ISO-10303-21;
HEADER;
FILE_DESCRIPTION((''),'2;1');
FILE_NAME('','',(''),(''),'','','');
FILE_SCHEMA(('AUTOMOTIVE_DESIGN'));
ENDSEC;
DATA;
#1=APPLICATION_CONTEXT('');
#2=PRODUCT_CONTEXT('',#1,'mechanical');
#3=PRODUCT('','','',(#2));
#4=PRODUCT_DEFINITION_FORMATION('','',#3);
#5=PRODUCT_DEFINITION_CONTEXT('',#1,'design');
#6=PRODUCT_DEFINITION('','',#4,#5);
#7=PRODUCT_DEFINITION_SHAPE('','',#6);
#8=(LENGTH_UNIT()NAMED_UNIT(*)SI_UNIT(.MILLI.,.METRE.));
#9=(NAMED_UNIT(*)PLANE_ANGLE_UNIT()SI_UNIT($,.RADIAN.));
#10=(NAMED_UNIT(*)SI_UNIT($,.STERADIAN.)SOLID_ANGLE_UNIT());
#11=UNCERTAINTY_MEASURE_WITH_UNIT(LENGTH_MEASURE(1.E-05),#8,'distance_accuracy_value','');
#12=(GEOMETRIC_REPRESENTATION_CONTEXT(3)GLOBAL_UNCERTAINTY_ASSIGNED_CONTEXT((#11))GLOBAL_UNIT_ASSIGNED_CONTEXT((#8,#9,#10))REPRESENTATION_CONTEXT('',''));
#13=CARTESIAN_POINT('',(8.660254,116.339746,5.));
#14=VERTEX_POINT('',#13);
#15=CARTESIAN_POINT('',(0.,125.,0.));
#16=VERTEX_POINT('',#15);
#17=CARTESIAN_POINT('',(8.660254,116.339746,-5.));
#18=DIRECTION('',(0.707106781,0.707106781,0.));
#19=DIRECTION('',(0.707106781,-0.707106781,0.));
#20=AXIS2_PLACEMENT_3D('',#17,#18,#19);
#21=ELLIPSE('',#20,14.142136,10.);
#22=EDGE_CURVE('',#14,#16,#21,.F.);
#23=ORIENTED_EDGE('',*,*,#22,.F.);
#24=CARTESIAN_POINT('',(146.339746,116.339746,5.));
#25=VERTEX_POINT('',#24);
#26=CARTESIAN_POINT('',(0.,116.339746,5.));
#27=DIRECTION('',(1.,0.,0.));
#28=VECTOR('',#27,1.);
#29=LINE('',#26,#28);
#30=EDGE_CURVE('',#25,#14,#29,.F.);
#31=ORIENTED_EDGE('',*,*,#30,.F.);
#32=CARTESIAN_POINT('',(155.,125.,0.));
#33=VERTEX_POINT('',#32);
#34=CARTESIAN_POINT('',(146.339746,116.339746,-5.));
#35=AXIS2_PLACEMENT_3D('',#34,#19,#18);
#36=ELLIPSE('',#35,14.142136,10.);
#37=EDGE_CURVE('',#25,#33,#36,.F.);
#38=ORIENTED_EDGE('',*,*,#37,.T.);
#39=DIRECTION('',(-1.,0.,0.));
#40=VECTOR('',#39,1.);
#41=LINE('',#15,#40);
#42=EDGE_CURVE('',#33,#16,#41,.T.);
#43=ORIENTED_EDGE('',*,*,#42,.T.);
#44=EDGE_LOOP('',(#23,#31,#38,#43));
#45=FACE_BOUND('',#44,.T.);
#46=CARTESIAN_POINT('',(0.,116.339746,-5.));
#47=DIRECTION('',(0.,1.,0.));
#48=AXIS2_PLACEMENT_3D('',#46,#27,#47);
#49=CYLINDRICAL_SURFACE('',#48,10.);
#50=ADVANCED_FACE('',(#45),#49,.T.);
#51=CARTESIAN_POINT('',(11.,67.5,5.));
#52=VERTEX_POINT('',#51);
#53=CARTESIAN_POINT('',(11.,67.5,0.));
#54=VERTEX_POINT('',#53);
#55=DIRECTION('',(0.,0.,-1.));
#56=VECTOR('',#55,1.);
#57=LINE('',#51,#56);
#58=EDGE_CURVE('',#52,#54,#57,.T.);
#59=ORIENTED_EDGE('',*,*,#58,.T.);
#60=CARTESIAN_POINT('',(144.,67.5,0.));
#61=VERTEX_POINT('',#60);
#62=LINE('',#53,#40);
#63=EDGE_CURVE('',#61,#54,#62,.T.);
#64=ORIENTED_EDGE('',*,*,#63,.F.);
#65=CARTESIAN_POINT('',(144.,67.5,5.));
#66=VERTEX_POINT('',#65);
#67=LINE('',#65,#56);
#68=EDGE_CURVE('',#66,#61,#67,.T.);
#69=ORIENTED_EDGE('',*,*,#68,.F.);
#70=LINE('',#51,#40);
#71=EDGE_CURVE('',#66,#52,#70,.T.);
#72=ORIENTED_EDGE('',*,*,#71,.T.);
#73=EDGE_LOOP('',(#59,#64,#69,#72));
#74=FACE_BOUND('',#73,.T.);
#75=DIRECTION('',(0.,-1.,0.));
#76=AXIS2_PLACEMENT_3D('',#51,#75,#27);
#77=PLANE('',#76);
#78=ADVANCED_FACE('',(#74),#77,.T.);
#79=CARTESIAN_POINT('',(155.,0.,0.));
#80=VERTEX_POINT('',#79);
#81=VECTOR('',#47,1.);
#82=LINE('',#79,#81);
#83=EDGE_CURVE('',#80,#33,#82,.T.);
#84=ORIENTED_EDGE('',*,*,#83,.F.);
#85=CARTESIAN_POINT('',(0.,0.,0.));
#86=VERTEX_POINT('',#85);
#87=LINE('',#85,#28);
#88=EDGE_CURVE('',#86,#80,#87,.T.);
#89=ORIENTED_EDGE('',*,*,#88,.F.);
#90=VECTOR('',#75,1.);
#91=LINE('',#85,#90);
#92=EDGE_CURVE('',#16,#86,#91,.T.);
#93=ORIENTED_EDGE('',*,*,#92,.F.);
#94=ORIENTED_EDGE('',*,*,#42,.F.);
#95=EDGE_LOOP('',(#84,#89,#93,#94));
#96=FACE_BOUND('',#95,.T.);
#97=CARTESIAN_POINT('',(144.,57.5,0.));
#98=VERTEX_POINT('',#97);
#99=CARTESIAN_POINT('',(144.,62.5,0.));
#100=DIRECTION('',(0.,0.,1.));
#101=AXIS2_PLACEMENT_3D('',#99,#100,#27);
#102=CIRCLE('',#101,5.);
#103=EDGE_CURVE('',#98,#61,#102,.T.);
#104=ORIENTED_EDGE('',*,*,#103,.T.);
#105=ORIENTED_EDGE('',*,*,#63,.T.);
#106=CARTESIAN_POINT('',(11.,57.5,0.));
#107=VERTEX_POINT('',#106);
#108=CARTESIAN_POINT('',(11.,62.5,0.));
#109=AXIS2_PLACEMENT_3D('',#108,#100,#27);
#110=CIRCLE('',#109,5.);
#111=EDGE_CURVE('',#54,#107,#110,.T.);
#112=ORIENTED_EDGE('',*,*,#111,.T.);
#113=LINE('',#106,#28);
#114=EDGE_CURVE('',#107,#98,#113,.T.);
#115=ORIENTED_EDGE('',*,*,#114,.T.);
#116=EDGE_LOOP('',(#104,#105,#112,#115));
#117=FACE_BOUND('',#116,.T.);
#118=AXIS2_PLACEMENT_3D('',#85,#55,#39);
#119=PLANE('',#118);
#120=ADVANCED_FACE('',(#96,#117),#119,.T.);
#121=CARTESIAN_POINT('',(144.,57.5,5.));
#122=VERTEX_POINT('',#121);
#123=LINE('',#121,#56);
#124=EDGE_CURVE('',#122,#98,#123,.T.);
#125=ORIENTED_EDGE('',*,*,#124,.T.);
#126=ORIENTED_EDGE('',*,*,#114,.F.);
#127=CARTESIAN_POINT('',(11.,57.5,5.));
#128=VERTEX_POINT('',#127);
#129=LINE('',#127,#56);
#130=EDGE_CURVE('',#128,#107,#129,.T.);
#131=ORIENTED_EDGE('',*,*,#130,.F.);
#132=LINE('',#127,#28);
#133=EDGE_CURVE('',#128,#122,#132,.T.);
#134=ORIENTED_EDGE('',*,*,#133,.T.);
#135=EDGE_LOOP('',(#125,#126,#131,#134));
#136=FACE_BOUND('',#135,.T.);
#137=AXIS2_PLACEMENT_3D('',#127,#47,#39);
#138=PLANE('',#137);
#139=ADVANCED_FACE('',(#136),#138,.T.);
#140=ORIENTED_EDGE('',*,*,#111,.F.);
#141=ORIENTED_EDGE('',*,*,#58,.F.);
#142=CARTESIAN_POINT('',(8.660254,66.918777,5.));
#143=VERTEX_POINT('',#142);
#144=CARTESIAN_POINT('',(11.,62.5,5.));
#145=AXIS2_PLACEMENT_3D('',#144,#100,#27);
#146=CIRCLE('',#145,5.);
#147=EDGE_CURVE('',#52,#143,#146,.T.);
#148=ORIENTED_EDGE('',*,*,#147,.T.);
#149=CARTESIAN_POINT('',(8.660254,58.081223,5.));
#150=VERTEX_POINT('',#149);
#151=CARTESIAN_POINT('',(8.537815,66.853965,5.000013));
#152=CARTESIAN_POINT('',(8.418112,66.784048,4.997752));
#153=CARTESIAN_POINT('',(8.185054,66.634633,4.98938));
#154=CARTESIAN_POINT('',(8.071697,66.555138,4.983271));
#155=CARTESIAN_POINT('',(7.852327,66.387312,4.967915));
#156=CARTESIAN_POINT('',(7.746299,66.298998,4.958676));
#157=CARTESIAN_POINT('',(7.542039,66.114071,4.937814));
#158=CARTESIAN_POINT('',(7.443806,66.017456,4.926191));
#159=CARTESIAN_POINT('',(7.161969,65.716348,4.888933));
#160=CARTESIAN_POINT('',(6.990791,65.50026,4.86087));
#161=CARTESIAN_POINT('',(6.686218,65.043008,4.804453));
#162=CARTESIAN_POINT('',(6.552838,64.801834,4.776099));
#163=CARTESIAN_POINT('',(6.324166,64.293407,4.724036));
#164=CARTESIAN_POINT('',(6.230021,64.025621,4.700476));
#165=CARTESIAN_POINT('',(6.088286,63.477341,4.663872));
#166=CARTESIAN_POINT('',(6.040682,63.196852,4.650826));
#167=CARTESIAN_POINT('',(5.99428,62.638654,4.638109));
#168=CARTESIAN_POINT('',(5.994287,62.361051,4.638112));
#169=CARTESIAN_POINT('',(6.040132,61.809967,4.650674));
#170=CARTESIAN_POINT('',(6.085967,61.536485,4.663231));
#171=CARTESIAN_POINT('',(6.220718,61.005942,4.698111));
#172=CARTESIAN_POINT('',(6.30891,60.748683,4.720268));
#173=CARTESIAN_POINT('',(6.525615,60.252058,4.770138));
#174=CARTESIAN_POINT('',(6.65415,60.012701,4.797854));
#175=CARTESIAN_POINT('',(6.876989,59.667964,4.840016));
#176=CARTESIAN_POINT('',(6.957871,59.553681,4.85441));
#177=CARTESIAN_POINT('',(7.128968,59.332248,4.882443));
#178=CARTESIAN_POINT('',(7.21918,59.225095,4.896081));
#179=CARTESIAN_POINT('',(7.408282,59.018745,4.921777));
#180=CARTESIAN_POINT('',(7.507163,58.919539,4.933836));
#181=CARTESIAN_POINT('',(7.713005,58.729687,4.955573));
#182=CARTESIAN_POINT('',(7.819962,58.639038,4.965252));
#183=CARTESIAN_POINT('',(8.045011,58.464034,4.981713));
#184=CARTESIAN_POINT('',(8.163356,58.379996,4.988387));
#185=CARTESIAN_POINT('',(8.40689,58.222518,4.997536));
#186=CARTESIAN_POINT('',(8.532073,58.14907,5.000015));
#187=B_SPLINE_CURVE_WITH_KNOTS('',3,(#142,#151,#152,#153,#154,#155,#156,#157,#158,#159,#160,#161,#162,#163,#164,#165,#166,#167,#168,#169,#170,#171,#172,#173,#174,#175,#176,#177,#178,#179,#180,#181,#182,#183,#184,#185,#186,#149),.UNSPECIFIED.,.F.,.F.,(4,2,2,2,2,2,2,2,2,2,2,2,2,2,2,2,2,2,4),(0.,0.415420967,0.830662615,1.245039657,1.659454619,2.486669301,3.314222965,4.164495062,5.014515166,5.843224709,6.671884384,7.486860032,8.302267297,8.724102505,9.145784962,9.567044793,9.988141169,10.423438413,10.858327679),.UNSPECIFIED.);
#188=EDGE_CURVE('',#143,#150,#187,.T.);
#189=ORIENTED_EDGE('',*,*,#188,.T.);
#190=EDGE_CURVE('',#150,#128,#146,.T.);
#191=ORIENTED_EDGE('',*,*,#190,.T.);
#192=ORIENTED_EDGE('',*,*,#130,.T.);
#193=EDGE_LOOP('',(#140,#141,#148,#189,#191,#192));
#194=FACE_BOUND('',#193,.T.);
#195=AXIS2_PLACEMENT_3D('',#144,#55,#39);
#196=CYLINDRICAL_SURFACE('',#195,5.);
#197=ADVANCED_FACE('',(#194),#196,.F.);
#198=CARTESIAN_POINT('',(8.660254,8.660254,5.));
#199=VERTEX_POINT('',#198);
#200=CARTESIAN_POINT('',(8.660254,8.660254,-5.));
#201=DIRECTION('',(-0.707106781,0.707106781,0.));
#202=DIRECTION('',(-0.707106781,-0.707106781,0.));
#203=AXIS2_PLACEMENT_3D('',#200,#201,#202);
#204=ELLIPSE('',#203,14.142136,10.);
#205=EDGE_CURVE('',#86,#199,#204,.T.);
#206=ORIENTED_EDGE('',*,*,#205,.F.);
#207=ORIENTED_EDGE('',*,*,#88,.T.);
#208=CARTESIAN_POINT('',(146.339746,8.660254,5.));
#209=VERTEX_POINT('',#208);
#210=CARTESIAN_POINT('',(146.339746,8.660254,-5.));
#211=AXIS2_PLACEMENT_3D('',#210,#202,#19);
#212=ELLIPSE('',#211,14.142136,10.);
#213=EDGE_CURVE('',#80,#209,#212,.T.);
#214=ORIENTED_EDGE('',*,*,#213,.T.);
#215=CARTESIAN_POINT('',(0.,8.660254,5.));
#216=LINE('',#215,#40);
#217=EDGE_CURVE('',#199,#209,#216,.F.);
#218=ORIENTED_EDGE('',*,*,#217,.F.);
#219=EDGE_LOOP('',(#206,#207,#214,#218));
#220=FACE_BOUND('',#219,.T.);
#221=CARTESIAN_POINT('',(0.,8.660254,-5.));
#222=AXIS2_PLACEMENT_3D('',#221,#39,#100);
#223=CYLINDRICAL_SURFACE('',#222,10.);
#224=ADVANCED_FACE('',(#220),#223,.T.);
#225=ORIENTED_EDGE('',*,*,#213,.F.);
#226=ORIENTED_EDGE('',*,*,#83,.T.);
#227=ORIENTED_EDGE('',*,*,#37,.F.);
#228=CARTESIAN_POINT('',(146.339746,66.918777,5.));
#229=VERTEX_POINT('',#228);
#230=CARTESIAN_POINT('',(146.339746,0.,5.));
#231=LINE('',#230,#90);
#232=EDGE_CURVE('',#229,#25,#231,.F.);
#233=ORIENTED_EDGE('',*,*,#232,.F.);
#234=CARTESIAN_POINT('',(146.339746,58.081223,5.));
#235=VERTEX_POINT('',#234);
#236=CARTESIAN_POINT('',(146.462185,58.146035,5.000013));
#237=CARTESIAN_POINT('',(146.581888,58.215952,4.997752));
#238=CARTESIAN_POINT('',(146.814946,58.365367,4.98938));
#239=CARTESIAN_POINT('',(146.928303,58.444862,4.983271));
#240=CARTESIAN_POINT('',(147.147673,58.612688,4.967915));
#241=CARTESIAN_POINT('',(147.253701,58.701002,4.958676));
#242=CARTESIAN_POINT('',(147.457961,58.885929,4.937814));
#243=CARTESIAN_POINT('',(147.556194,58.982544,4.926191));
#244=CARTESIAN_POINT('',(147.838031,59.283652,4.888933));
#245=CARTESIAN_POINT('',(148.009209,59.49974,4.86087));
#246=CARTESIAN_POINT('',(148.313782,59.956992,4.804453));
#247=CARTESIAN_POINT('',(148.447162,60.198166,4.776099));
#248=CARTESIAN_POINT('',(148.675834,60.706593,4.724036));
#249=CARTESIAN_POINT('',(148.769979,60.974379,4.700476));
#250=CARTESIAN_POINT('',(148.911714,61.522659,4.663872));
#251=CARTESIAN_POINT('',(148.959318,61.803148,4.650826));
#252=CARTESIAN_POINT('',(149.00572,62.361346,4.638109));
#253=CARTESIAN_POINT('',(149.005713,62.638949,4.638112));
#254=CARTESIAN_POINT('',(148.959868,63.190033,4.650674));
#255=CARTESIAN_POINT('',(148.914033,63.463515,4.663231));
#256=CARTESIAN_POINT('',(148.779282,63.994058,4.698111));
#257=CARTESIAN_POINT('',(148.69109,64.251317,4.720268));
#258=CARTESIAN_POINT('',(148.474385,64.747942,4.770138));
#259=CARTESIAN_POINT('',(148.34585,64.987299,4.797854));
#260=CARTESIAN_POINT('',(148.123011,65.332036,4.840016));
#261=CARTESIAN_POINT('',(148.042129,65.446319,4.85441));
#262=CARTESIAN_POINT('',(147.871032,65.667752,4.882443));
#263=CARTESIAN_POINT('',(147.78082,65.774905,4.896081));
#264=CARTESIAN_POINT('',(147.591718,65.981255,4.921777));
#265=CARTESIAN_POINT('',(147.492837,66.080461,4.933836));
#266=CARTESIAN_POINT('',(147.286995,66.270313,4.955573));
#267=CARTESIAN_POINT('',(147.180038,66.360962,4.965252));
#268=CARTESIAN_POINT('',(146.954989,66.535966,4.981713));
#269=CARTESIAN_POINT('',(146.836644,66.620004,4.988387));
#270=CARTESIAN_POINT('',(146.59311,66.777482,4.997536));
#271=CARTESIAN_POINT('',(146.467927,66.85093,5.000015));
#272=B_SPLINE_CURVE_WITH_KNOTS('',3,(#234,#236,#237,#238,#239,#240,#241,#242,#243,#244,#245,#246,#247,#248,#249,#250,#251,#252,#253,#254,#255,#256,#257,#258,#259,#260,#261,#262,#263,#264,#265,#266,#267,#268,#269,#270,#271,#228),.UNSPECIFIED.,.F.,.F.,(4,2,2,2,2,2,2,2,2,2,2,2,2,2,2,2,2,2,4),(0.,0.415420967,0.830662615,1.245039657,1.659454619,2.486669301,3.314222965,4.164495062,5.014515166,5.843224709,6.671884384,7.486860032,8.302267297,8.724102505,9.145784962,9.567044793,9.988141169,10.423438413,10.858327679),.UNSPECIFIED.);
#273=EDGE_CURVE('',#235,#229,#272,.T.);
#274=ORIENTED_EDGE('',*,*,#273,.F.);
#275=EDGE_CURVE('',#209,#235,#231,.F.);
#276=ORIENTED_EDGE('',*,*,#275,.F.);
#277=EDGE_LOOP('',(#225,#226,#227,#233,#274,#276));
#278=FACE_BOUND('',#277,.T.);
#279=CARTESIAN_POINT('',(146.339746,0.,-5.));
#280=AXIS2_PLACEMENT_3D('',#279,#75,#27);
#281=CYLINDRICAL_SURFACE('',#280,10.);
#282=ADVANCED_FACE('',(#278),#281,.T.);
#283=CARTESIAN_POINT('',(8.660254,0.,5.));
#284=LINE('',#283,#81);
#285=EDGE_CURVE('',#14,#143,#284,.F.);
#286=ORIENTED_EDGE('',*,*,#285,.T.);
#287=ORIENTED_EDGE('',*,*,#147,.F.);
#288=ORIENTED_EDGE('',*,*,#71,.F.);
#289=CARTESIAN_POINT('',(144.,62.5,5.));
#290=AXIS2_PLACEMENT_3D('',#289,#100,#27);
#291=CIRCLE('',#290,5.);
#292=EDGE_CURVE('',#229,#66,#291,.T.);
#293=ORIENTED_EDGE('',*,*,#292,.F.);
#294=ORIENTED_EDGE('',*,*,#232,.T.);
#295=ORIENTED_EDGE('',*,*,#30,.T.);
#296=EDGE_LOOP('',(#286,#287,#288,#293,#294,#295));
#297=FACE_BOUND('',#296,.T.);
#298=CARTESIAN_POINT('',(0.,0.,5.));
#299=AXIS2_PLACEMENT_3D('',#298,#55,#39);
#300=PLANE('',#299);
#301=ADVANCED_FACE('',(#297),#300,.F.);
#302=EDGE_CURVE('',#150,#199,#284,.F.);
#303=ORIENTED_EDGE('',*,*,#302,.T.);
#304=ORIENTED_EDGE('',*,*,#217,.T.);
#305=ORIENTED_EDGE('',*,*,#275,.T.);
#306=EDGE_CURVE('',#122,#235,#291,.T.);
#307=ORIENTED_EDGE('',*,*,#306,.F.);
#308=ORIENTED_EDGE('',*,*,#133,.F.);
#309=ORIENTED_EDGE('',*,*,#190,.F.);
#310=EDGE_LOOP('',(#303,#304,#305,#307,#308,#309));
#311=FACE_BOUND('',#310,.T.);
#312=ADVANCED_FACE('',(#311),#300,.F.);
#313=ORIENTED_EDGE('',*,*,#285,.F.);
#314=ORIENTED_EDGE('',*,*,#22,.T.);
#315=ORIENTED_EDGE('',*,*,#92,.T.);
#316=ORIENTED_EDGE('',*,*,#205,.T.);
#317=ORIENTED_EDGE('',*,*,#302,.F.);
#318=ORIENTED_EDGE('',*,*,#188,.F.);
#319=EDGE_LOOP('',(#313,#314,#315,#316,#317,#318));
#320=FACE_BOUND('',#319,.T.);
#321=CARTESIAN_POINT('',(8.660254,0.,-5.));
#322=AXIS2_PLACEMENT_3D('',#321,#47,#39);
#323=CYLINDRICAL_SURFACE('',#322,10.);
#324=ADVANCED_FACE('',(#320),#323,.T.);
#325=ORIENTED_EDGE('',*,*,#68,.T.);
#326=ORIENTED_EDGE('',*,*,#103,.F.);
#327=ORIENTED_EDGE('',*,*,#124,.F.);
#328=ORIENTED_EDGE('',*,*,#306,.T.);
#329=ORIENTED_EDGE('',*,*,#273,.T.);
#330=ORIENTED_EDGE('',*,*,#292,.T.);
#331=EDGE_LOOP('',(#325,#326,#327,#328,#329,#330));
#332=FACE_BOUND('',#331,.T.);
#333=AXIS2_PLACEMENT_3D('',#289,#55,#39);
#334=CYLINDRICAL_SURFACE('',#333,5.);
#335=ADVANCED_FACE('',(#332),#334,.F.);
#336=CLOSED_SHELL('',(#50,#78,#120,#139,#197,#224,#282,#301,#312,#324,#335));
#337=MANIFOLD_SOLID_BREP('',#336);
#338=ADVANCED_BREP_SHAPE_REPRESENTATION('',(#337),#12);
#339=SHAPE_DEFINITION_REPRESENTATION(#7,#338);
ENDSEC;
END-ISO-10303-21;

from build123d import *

# Parameters (mm, degrees)
SKETCH_1_W      = 155
SKETCH_1_H      = 125
EXTRUDE_1_DEPTH = 5
FILLET_1_R      = 10


with BuildPart() as part:
    # 草图1 → 凸台-拉伸1 (new body)
    with BuildSketch(Plane.XY):
        with Locations((77.5, 62.5)):
            Rectangle(SKETCH_1_W, SKETCH_1_H)
        with BuildLine():
            Line((11, 67.5), (144, 67.5))
            ThreePointArc((144, 67.5), (149, 62.5), (144, 57.5))
            Line((144, 57.5), (11, 57.5))
            ThreePointArc((11, 57.5), (6, 62.5), (11, 67.5))
        make_face(mode=Mode.SUBTRACT)
    extrude(amount=EXTRUDE_1_DEPTH)

    # 圆角1
    # the kernel refuses this fillet: 10 mm, written as the material it takes off along each edge
    with BuildSketch(Plane(origin=(0, 146.650635095, 5), x_dir=(0, 0, -1), z_dir=(0, -1, 0)), Plane(origin=(155, -21.650635095, 5), x_dir=(0, 0, -1), z_dir=(0, 1, 0))) as fillet_1_piece_1:
        with BuildLine():
            CenterArc((10, 8.660254038), FILLET_1_R, 180, 60)
            Line((0, 8.660254038), (-0.2, 8.660254038))
            Line((-0.2, 8.660254038), (-0.2, 0))
            Line((-0.2, 0), (0, -0.2))
            ThreePointArc((0, -0.2), (2.5, -0.2), (4.9, -0.173205081))
            Line((4.9, -0.173205081), (5, 0))
        make_face()
    extrude(amount=168.301270189, mode=Mode.SUBTRACT)
    with BuildSketch(Plane(origin=(-21.650635095, 0, 5), x_dir=(0, 0, -1), z_dir=(1, 0, 0)), Plane(origin=(176.650635095, 125, 5), x_dir=(0, 0, -1), z_dir=(-1, 0, 0))) as fillet_1_piece_2:
        with BuildLine():
            CenterArc((10, 8.660254038), FILLET_1_R, 180, 60)
            Line((0, 8.660254038), (-0.2, 8.660254038))
            Line((-0.2, 8.660254038), (-0.2, 0))
            Line((-0.2, 0), (0, -0.2))
            ThreePointArc((0, -0.2), (2.5, -0.2), (4.9, -0.173205081))
            Line((4.9, -0.173205081), (5, 0))
        make_face()
    extrude(amount=198.301270189, mode=Mode.SUBTRACT)


solid = part.part
